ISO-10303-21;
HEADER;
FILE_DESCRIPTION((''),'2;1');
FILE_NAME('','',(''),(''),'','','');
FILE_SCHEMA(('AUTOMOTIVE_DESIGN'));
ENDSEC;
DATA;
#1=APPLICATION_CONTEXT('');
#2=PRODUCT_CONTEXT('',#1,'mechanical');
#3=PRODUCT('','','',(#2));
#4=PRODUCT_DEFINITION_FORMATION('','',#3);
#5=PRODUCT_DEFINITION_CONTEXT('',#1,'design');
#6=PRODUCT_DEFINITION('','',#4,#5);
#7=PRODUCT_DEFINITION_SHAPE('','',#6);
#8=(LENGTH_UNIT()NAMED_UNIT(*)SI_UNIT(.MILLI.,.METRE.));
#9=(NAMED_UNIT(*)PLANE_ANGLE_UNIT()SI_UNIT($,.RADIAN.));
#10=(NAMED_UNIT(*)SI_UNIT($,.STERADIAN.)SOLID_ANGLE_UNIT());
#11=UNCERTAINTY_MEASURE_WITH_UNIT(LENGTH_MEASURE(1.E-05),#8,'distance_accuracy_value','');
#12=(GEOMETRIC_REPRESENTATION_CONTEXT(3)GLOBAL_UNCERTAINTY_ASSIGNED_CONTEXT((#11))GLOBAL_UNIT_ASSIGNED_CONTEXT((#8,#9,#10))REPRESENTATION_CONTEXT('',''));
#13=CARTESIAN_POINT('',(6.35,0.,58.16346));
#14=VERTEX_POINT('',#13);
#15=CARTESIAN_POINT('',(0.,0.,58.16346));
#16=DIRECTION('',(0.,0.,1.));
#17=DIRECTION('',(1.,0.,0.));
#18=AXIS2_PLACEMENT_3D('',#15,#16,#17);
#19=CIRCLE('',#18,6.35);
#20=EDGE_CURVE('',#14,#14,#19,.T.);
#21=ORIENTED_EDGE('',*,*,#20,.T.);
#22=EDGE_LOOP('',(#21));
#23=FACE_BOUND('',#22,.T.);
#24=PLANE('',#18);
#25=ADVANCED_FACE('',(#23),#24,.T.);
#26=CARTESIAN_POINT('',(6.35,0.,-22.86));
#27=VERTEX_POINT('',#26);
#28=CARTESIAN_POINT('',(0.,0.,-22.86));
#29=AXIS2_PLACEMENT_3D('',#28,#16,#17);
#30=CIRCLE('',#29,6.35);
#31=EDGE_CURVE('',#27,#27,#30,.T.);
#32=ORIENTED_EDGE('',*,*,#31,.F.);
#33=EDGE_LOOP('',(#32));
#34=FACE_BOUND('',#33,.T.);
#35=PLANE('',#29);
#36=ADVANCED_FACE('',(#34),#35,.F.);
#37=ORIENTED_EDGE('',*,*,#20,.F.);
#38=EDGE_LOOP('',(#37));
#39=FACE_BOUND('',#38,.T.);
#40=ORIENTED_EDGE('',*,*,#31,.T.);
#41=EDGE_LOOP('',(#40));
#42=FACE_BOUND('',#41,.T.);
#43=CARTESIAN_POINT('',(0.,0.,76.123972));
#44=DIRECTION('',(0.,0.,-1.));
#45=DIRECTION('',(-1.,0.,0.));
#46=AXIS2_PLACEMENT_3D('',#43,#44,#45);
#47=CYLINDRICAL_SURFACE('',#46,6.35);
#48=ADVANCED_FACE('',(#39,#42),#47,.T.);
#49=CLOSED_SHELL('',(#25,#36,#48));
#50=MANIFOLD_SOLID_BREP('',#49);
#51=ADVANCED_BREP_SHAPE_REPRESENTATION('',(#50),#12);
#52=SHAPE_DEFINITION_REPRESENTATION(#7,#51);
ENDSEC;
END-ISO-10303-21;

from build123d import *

# Parameters (mm, degrees)
BOSS_EXTRUDE1_OUTLINE_R = 6.35
BOSS_EXTRUDE1_DEPTH     = 81.02346


# Read off the part's stored shape, not the designer's step: Boss-Extrude1
with BuildPart() as part:
    # Boss-Extrude1 outline → Boss-Extrude1 (new body)
    with BuildSketch(Plane.XY.offset(-22.86)):
        Circle(BOSS_EXTRUDE1_OUTLINE_R)
    extrude(amount=BOSS_EXTRUDE1_DEPTH)


solid = part.part
